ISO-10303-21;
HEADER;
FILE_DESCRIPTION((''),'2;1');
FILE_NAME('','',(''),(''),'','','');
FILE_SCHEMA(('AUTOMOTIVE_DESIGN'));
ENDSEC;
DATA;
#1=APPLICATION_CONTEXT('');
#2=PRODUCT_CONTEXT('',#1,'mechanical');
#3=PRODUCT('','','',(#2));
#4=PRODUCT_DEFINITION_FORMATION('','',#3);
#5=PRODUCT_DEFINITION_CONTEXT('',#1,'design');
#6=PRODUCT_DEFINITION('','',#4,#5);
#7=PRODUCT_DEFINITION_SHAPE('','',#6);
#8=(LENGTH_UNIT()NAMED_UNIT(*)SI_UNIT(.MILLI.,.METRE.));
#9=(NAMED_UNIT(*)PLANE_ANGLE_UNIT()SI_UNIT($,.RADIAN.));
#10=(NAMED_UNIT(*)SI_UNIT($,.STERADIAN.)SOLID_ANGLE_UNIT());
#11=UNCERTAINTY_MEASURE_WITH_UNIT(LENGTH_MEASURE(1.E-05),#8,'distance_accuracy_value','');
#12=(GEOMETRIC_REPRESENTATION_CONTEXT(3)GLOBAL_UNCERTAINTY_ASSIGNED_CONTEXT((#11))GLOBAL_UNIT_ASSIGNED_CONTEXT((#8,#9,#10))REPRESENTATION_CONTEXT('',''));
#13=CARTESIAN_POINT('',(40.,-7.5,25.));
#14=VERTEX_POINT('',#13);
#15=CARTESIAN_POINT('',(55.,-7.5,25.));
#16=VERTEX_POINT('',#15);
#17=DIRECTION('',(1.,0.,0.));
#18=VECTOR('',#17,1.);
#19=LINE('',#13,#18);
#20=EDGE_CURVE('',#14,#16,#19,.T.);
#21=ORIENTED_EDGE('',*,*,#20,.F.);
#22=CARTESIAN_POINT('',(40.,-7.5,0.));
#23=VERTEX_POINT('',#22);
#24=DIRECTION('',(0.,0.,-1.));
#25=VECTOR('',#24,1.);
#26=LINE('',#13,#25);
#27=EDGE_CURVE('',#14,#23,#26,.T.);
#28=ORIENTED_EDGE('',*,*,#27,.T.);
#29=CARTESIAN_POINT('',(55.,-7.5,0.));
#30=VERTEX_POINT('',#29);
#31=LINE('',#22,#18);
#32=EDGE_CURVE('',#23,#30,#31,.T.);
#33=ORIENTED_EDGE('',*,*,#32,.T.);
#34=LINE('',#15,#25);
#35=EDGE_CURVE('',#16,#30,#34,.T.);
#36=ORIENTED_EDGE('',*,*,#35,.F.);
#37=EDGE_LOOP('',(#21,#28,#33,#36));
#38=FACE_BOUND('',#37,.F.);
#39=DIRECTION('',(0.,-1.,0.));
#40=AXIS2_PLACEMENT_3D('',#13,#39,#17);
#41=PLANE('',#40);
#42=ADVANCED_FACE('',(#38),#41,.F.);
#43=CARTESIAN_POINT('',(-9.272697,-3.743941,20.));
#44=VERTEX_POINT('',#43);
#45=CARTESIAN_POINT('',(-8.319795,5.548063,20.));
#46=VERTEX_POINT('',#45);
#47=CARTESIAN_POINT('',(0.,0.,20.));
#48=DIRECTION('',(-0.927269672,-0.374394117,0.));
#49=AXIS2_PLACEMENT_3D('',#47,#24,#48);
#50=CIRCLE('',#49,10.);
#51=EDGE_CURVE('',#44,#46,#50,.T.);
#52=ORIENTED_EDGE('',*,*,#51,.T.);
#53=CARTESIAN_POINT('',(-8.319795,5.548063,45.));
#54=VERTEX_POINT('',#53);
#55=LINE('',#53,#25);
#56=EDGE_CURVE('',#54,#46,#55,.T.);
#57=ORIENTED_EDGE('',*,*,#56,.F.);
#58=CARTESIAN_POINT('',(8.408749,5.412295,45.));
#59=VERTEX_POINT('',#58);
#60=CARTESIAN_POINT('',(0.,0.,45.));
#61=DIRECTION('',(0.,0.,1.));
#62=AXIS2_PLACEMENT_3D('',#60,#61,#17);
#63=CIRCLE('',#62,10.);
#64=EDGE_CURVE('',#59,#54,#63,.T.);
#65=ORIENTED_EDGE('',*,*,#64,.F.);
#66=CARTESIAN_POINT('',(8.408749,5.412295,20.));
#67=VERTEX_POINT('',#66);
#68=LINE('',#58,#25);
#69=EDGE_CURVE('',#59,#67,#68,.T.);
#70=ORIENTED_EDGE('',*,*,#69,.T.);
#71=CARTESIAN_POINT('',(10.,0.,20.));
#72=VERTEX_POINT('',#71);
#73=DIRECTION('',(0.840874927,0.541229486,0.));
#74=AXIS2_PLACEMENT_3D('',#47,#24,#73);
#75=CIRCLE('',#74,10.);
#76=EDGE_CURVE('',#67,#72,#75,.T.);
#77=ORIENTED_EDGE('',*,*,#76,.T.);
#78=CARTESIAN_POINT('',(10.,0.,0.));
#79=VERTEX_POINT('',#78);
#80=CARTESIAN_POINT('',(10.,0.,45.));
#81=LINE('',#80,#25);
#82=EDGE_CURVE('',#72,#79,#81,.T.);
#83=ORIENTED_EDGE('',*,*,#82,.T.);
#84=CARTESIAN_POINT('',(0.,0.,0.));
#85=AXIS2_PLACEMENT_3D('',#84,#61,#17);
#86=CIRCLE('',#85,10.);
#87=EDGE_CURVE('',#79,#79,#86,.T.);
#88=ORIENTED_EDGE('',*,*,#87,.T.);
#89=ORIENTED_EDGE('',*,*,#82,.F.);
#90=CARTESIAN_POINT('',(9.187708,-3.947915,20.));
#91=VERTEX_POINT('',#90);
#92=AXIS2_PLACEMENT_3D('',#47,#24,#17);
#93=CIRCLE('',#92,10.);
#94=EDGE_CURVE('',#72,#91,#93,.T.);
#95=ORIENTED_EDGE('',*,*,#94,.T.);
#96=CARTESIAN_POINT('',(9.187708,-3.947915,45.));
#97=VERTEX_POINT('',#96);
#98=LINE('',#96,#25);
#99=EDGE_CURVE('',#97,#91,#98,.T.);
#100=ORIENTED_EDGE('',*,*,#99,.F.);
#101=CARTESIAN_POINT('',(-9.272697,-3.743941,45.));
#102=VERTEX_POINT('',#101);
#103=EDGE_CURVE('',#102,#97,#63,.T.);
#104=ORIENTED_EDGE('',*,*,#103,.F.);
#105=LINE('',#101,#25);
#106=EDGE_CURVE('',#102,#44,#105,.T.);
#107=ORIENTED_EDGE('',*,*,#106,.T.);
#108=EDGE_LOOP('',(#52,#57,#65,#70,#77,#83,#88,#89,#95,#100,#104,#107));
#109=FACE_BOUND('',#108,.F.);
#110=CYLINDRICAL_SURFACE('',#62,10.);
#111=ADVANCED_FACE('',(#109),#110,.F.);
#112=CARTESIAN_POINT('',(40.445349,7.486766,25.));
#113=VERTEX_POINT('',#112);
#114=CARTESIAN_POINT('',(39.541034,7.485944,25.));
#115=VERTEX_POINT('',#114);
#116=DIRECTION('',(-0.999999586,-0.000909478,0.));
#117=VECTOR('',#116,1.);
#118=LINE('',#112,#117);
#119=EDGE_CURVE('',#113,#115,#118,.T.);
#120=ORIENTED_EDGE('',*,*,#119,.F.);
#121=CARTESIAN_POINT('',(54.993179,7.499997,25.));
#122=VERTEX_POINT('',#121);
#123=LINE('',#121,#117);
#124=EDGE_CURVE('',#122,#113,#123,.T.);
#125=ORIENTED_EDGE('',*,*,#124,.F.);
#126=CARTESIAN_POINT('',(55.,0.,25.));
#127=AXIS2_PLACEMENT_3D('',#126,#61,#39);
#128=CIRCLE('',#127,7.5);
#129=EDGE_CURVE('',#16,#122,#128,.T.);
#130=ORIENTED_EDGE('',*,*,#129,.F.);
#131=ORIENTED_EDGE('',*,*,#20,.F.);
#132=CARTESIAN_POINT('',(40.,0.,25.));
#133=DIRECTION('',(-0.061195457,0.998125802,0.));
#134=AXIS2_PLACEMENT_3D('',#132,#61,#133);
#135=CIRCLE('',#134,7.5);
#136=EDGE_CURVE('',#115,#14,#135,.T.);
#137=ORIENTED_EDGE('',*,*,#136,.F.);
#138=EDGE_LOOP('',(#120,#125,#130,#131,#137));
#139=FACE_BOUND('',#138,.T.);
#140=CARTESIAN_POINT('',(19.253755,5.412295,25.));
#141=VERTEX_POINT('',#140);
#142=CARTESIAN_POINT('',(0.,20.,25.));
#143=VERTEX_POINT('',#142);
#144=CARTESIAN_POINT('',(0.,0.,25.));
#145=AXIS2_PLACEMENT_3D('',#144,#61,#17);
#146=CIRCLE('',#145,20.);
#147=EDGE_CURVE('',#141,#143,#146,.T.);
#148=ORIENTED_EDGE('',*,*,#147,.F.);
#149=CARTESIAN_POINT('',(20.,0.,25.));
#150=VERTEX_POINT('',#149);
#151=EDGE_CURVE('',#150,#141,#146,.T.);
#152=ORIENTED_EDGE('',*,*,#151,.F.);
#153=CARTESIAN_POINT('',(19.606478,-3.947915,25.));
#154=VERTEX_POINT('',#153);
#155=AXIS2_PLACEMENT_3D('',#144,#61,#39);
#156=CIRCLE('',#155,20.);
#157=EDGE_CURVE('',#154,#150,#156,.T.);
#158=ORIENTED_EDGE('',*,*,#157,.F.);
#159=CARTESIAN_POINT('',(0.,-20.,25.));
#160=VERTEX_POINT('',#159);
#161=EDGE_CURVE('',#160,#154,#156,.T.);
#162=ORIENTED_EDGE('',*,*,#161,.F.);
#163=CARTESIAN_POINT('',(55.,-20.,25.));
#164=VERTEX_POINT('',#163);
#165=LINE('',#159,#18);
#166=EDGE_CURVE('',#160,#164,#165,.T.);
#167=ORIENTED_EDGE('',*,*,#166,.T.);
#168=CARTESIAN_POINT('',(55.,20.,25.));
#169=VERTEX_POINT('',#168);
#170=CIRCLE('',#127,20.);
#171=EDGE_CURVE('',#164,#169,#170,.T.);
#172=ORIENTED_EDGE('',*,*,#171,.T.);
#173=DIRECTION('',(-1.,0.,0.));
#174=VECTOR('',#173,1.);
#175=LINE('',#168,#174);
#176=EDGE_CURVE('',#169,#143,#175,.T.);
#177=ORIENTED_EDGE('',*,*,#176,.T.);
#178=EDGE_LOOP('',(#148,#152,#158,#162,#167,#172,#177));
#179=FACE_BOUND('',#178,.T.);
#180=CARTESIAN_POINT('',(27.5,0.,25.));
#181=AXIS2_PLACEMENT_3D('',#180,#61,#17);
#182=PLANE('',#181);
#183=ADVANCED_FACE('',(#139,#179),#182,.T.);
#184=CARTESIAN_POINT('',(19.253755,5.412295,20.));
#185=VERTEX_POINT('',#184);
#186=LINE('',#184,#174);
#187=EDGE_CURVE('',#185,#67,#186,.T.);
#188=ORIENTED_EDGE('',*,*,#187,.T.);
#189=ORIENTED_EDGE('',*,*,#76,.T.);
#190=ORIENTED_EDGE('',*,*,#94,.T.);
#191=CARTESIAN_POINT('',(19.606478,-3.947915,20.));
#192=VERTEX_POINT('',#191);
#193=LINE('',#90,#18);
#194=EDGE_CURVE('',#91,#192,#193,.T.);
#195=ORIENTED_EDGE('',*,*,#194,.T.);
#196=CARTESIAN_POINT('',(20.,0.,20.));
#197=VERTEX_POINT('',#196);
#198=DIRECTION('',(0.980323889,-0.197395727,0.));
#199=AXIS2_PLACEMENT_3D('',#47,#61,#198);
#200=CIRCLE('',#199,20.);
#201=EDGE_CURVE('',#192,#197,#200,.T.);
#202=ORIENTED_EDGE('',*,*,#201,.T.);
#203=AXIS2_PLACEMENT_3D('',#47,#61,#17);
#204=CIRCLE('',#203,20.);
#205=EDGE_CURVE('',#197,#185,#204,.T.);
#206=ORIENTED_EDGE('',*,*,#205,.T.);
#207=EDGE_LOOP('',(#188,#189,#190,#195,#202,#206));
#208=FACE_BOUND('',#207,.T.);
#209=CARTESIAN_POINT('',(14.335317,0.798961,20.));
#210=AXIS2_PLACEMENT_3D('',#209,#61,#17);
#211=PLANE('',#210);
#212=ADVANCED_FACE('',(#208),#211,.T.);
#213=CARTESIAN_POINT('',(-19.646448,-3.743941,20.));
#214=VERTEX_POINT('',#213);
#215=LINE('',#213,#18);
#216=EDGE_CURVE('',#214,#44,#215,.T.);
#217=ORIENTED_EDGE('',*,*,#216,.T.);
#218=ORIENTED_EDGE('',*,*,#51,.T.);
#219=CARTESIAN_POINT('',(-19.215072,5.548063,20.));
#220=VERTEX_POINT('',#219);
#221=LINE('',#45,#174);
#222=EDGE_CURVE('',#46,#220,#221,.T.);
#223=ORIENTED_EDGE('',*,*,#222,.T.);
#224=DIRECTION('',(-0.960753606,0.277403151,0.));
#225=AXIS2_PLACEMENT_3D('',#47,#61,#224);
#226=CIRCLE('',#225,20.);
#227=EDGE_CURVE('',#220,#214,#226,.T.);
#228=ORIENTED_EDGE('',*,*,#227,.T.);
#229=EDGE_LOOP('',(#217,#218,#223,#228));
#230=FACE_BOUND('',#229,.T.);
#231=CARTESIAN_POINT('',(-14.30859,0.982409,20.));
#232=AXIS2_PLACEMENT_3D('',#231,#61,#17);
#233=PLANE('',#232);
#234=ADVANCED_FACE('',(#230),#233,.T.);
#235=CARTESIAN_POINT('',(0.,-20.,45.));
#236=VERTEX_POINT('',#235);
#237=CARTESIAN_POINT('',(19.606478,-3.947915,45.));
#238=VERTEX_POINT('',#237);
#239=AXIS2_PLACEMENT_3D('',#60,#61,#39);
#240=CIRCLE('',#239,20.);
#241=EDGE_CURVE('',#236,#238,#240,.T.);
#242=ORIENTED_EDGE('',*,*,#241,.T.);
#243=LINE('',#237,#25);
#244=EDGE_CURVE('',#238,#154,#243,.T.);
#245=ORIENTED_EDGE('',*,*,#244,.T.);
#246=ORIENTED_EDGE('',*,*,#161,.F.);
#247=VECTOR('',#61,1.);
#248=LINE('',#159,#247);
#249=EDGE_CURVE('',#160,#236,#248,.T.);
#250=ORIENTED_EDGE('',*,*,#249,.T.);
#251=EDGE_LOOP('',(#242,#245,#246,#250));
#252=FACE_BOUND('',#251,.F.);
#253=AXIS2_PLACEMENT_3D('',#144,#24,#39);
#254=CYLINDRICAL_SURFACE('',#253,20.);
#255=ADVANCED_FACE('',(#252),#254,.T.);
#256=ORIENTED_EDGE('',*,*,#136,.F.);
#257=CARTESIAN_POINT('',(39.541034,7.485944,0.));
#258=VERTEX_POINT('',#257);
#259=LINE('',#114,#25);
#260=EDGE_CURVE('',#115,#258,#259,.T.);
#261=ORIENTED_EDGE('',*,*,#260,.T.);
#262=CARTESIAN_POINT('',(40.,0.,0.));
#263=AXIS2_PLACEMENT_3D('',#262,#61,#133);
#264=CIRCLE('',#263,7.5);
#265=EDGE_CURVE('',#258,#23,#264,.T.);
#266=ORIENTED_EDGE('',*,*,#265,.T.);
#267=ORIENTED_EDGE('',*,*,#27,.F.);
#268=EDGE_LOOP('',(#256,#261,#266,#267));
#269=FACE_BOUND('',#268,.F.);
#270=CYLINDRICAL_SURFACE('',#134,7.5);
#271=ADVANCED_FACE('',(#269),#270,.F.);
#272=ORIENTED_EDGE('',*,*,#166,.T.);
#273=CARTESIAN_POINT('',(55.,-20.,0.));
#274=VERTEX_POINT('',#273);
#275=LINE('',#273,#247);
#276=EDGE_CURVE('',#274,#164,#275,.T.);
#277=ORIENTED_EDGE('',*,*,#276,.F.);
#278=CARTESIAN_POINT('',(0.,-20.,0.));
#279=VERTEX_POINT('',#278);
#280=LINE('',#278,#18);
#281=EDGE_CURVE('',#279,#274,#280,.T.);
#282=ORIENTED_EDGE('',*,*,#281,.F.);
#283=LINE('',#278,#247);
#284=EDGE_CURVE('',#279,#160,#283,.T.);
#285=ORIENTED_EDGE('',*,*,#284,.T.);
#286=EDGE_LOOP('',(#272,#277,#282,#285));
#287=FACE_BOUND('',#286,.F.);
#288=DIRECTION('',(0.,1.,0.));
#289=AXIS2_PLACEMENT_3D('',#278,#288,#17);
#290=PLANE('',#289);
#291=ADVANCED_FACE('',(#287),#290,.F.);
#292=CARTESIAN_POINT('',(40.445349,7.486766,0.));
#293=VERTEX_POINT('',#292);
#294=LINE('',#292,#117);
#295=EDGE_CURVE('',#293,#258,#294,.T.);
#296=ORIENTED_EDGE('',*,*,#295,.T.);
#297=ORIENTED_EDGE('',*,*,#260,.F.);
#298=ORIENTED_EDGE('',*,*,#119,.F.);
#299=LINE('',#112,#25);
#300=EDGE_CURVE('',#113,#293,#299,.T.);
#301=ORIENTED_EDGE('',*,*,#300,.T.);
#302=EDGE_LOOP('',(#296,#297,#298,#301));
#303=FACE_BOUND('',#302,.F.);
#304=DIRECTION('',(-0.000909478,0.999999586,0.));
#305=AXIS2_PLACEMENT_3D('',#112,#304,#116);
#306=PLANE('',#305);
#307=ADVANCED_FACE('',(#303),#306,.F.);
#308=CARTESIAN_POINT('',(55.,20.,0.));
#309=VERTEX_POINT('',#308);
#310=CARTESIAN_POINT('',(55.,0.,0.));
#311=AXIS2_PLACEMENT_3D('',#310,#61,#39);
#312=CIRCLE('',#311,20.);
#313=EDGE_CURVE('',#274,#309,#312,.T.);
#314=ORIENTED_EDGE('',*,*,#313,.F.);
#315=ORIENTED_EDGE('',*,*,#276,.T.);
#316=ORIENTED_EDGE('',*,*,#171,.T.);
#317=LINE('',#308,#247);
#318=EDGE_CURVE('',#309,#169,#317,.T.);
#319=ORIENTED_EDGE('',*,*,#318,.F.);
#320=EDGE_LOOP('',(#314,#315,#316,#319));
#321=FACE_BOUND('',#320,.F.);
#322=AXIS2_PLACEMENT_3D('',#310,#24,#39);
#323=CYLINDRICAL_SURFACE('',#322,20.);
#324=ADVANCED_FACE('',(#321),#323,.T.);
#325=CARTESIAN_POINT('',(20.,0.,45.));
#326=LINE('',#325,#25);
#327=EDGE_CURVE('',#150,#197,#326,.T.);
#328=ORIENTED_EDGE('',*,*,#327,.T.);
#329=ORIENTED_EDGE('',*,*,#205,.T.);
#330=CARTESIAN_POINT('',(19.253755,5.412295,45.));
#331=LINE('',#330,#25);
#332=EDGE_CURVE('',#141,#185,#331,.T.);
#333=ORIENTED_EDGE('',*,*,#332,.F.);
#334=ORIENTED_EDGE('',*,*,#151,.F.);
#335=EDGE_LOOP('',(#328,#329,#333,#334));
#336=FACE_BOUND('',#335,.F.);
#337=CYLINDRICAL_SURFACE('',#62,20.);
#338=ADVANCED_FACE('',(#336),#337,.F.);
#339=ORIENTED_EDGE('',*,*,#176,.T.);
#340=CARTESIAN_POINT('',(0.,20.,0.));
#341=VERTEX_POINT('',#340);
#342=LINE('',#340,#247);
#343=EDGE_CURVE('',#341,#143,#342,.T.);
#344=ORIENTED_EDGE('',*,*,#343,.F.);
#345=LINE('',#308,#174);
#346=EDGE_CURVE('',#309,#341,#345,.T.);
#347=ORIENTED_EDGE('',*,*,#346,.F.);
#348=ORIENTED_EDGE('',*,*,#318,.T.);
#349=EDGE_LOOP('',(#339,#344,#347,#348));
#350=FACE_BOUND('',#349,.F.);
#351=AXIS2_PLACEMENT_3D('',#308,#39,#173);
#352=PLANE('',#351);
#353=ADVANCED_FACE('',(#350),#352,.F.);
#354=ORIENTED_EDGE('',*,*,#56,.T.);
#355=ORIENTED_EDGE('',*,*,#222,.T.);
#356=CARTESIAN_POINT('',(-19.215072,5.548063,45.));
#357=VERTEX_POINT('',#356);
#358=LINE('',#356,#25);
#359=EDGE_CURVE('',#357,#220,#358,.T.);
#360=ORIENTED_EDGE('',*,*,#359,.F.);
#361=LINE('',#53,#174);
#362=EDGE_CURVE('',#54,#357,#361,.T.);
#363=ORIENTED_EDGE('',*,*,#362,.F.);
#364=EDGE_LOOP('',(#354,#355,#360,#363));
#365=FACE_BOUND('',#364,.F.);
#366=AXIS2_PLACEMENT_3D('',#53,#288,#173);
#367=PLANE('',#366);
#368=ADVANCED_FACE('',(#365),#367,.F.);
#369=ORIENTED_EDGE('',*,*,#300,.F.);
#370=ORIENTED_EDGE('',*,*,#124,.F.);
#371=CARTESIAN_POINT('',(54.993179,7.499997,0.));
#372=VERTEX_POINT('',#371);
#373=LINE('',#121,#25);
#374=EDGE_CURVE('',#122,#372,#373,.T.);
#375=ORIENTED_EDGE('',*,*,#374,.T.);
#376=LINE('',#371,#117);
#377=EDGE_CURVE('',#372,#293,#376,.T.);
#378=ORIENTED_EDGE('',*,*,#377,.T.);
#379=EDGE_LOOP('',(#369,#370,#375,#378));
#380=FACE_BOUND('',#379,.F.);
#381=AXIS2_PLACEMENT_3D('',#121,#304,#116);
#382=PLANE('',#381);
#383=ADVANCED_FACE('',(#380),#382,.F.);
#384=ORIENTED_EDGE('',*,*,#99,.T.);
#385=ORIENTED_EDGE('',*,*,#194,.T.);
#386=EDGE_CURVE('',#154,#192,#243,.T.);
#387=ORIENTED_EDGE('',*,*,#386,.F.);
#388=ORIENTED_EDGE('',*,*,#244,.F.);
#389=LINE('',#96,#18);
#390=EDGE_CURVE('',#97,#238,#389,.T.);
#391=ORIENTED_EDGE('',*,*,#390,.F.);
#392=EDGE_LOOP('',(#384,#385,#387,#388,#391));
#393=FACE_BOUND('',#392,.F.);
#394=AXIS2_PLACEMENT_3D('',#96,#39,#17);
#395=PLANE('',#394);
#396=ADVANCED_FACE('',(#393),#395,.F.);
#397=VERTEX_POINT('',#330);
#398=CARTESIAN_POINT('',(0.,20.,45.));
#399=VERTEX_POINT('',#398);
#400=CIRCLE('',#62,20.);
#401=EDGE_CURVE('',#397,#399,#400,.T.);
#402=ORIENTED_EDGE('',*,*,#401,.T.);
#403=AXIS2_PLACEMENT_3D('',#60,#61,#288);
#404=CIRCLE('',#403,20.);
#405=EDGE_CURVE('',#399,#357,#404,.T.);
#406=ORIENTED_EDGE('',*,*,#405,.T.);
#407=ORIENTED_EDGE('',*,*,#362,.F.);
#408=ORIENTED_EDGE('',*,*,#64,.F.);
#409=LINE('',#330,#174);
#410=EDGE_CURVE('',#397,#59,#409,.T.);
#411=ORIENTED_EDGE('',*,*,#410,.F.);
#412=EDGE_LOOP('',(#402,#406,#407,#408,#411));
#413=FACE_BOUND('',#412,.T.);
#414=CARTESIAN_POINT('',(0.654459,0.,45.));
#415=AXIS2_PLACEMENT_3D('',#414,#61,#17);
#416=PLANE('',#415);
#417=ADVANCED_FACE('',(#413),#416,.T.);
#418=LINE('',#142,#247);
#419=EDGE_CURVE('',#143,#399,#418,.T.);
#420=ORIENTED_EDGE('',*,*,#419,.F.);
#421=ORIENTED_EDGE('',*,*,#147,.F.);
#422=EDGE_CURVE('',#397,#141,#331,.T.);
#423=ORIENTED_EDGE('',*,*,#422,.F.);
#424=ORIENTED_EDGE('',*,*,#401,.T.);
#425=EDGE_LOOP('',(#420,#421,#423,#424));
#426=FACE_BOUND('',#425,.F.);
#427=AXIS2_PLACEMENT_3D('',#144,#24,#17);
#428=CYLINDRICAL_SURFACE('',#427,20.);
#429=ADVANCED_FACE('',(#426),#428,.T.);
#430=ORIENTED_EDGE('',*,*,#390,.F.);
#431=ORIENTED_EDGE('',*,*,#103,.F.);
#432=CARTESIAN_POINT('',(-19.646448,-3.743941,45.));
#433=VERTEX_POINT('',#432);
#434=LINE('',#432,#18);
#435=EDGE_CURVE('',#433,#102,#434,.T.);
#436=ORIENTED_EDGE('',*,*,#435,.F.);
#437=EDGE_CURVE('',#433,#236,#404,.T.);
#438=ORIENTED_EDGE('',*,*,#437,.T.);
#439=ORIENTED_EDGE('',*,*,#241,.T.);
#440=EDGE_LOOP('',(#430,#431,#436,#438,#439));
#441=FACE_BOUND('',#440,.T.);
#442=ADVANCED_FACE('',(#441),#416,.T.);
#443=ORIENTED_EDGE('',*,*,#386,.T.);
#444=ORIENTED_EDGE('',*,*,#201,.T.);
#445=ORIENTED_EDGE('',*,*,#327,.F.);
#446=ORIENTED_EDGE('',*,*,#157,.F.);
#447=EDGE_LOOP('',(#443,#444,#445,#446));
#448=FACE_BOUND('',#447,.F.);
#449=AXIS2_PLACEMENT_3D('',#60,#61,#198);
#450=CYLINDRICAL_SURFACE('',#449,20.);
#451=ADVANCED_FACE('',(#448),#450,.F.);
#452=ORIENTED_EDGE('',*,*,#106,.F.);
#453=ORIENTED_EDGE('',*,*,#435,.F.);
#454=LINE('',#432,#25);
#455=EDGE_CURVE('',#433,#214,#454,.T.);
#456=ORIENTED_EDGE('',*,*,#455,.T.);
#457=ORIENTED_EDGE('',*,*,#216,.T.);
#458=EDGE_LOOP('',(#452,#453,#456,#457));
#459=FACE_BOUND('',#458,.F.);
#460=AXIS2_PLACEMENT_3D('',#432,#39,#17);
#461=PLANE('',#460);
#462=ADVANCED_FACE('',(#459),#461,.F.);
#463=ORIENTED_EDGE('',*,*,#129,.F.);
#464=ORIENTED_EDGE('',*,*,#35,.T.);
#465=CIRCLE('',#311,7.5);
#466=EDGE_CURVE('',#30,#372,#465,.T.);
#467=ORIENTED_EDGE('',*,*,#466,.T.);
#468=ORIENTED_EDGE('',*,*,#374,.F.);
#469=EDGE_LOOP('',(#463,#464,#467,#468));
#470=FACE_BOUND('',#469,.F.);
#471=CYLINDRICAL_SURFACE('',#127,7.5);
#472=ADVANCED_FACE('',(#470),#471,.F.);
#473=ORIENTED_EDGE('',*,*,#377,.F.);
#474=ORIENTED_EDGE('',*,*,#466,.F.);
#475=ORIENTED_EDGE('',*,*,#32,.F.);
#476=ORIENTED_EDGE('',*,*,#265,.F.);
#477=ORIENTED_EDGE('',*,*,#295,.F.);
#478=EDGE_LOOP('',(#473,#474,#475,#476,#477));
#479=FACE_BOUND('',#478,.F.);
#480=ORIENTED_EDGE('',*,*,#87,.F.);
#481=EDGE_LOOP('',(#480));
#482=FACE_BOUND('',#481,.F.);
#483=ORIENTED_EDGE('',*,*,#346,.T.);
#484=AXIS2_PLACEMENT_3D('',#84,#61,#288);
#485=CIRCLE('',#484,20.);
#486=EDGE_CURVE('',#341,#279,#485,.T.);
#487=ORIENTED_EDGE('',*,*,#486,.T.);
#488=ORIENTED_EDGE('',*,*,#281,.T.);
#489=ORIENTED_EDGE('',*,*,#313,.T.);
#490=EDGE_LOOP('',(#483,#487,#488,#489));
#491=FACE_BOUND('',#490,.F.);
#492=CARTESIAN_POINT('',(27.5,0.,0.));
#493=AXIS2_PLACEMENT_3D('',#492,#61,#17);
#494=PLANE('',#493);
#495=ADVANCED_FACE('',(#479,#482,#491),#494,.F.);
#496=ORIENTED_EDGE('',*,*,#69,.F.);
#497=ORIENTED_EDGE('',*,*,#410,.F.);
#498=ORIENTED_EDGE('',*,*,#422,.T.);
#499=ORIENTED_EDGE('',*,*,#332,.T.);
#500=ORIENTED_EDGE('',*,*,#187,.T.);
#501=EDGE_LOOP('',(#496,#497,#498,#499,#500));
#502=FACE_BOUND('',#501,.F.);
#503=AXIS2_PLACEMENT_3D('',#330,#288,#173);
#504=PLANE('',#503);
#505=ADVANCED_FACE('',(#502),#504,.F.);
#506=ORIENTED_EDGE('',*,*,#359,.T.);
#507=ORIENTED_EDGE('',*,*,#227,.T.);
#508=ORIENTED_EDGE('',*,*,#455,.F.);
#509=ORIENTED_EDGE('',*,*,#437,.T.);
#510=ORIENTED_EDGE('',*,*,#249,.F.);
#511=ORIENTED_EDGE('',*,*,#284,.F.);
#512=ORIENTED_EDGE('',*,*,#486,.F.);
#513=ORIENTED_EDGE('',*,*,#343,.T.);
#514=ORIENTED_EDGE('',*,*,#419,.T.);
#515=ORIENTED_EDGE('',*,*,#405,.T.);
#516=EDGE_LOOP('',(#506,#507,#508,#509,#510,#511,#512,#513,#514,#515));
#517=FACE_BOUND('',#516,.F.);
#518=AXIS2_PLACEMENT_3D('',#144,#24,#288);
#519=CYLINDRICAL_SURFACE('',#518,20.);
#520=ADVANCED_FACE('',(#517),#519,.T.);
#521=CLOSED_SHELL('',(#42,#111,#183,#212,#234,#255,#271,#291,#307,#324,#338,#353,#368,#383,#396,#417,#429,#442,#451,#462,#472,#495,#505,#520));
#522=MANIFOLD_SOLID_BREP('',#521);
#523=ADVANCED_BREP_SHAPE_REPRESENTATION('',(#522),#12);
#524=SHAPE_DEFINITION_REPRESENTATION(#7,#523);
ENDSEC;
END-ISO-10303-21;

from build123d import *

# Parameters (mm, degrees)
F1_DEPTH = 25
F3_DEPTH = 20
F4_R     = 10
F5_DEPTH = 77.8
F7_DEPTH = 25
F9_DEPTH = 25


# Not quite as in the source:
# - ends of sketch curves that miss each other by under 0.0002 mm in the source are joined


with BuildPart() as f1:
    # F0 (on Top) → F1 (new body)
    with BuildSketch(Plane.XY):
        with BuildLine():
            Line((55, 20), (0, 20))
            ThreePointArc((0, 20), (-20, 0), (0, -20))
            Line((0, -20), (55, -20))
            ThreePointArc((55, -20), (75, 0), (55, 20))
        make_face()
    extrude(amount=F1_DEPTH)

    # F2 (on face) → F3 (join)
    with BuildSketch(Plane.XY.offset(25)):
        with BuildLine():
            ThreePointArc((0, -20), (14.1421356237, -14.1421356237), (20, 0))
            ThreePointArc((20, 0), (14.1421356237, 14.1421356237), (0, 20))
            ThreePointArc((0, 20), (-20, 0), (0, -20))
        make_face()
    extrude(amount=F3_DEPTH)

    # F4 (on face) → F5 (cut)
    with BuildSketch(Plane.XY.offset(45)):
        Circle(F4_R)
    extrude(amount=-F5_DEPTH, mode=Mode.SUBTRACT)

    # F6 (on face) → F7 (cut)
    with BuildSketch(Plane.XY.offset(45)):
        with BuildLine():
            ThreePointArc((-9.2726967228, -3.7439411704), (-9.9478279478, 1.02015642), (-8.3197954675, 5.5480630295))
            Line((-8.3197954675, 5.5480630295), (-19.2150721212, 5.5480630295))
            ThreePointArc((-19.2150721212, 5.5480630295), (-19.9784825468, 0.9274886135), (-19.6464476309, -3.7439411704))
            Line((-19.6464476309, -3.7439411704), (-9.2726967228, -3.7439411704))
        make_face()
        with BuildLine():
            Line((19.2537545525, 5.4122948584), (8.4087492748, 5.4122948584))
            ThreePointArc((8.4087492748, 5.4122948584), (9.593943213, 2.8206831843), (10, 0))
            ThreePointArc((10, 0), (9.7948219983, -2.0153069299), (9.1877075957, -3.94791453))
            Line((9.1877075957, -3.94791453), (19.6064777781, -3.94791453))
            ThreePointArc((19.6064777781, -3.94791453), (19.9013762786, -1.9837394534), (20, 0))
            ThreePointArc((20, 0), (19.8125602971, 2.7317493435), (19.2537545525, 5.4122948584))
        make_face()
    extrude(amount=-F7_DEPTH, mode=Mode.SUBTRACT)

    # F8 (on face) → F9 (cut)
    with BuildSketch(Plane.XY.offset(25)):
        with BuildLine():
            Line((54.9931789181, 7.4999968982), (40.4453485752, 7.4867659671))
            Line((40.4453485752, 7.4867659671), (39.5410340755, 7.485943513))
            ThreePointArc((39.5410340755, 7.485943513), (32.5035149454, -0.229590562), (40, -7.5))
            Line((40, -7.5), (55, -7.5))
            ThreePointArc((55, -7.5), (62.4999992241, 0.0034115228), (54.9931789181, 7.4999968982))
        make_face()
    extrude(amount=-F9_DEPTH, mode=Mode.SUBTRACT)


solid = f1.part
